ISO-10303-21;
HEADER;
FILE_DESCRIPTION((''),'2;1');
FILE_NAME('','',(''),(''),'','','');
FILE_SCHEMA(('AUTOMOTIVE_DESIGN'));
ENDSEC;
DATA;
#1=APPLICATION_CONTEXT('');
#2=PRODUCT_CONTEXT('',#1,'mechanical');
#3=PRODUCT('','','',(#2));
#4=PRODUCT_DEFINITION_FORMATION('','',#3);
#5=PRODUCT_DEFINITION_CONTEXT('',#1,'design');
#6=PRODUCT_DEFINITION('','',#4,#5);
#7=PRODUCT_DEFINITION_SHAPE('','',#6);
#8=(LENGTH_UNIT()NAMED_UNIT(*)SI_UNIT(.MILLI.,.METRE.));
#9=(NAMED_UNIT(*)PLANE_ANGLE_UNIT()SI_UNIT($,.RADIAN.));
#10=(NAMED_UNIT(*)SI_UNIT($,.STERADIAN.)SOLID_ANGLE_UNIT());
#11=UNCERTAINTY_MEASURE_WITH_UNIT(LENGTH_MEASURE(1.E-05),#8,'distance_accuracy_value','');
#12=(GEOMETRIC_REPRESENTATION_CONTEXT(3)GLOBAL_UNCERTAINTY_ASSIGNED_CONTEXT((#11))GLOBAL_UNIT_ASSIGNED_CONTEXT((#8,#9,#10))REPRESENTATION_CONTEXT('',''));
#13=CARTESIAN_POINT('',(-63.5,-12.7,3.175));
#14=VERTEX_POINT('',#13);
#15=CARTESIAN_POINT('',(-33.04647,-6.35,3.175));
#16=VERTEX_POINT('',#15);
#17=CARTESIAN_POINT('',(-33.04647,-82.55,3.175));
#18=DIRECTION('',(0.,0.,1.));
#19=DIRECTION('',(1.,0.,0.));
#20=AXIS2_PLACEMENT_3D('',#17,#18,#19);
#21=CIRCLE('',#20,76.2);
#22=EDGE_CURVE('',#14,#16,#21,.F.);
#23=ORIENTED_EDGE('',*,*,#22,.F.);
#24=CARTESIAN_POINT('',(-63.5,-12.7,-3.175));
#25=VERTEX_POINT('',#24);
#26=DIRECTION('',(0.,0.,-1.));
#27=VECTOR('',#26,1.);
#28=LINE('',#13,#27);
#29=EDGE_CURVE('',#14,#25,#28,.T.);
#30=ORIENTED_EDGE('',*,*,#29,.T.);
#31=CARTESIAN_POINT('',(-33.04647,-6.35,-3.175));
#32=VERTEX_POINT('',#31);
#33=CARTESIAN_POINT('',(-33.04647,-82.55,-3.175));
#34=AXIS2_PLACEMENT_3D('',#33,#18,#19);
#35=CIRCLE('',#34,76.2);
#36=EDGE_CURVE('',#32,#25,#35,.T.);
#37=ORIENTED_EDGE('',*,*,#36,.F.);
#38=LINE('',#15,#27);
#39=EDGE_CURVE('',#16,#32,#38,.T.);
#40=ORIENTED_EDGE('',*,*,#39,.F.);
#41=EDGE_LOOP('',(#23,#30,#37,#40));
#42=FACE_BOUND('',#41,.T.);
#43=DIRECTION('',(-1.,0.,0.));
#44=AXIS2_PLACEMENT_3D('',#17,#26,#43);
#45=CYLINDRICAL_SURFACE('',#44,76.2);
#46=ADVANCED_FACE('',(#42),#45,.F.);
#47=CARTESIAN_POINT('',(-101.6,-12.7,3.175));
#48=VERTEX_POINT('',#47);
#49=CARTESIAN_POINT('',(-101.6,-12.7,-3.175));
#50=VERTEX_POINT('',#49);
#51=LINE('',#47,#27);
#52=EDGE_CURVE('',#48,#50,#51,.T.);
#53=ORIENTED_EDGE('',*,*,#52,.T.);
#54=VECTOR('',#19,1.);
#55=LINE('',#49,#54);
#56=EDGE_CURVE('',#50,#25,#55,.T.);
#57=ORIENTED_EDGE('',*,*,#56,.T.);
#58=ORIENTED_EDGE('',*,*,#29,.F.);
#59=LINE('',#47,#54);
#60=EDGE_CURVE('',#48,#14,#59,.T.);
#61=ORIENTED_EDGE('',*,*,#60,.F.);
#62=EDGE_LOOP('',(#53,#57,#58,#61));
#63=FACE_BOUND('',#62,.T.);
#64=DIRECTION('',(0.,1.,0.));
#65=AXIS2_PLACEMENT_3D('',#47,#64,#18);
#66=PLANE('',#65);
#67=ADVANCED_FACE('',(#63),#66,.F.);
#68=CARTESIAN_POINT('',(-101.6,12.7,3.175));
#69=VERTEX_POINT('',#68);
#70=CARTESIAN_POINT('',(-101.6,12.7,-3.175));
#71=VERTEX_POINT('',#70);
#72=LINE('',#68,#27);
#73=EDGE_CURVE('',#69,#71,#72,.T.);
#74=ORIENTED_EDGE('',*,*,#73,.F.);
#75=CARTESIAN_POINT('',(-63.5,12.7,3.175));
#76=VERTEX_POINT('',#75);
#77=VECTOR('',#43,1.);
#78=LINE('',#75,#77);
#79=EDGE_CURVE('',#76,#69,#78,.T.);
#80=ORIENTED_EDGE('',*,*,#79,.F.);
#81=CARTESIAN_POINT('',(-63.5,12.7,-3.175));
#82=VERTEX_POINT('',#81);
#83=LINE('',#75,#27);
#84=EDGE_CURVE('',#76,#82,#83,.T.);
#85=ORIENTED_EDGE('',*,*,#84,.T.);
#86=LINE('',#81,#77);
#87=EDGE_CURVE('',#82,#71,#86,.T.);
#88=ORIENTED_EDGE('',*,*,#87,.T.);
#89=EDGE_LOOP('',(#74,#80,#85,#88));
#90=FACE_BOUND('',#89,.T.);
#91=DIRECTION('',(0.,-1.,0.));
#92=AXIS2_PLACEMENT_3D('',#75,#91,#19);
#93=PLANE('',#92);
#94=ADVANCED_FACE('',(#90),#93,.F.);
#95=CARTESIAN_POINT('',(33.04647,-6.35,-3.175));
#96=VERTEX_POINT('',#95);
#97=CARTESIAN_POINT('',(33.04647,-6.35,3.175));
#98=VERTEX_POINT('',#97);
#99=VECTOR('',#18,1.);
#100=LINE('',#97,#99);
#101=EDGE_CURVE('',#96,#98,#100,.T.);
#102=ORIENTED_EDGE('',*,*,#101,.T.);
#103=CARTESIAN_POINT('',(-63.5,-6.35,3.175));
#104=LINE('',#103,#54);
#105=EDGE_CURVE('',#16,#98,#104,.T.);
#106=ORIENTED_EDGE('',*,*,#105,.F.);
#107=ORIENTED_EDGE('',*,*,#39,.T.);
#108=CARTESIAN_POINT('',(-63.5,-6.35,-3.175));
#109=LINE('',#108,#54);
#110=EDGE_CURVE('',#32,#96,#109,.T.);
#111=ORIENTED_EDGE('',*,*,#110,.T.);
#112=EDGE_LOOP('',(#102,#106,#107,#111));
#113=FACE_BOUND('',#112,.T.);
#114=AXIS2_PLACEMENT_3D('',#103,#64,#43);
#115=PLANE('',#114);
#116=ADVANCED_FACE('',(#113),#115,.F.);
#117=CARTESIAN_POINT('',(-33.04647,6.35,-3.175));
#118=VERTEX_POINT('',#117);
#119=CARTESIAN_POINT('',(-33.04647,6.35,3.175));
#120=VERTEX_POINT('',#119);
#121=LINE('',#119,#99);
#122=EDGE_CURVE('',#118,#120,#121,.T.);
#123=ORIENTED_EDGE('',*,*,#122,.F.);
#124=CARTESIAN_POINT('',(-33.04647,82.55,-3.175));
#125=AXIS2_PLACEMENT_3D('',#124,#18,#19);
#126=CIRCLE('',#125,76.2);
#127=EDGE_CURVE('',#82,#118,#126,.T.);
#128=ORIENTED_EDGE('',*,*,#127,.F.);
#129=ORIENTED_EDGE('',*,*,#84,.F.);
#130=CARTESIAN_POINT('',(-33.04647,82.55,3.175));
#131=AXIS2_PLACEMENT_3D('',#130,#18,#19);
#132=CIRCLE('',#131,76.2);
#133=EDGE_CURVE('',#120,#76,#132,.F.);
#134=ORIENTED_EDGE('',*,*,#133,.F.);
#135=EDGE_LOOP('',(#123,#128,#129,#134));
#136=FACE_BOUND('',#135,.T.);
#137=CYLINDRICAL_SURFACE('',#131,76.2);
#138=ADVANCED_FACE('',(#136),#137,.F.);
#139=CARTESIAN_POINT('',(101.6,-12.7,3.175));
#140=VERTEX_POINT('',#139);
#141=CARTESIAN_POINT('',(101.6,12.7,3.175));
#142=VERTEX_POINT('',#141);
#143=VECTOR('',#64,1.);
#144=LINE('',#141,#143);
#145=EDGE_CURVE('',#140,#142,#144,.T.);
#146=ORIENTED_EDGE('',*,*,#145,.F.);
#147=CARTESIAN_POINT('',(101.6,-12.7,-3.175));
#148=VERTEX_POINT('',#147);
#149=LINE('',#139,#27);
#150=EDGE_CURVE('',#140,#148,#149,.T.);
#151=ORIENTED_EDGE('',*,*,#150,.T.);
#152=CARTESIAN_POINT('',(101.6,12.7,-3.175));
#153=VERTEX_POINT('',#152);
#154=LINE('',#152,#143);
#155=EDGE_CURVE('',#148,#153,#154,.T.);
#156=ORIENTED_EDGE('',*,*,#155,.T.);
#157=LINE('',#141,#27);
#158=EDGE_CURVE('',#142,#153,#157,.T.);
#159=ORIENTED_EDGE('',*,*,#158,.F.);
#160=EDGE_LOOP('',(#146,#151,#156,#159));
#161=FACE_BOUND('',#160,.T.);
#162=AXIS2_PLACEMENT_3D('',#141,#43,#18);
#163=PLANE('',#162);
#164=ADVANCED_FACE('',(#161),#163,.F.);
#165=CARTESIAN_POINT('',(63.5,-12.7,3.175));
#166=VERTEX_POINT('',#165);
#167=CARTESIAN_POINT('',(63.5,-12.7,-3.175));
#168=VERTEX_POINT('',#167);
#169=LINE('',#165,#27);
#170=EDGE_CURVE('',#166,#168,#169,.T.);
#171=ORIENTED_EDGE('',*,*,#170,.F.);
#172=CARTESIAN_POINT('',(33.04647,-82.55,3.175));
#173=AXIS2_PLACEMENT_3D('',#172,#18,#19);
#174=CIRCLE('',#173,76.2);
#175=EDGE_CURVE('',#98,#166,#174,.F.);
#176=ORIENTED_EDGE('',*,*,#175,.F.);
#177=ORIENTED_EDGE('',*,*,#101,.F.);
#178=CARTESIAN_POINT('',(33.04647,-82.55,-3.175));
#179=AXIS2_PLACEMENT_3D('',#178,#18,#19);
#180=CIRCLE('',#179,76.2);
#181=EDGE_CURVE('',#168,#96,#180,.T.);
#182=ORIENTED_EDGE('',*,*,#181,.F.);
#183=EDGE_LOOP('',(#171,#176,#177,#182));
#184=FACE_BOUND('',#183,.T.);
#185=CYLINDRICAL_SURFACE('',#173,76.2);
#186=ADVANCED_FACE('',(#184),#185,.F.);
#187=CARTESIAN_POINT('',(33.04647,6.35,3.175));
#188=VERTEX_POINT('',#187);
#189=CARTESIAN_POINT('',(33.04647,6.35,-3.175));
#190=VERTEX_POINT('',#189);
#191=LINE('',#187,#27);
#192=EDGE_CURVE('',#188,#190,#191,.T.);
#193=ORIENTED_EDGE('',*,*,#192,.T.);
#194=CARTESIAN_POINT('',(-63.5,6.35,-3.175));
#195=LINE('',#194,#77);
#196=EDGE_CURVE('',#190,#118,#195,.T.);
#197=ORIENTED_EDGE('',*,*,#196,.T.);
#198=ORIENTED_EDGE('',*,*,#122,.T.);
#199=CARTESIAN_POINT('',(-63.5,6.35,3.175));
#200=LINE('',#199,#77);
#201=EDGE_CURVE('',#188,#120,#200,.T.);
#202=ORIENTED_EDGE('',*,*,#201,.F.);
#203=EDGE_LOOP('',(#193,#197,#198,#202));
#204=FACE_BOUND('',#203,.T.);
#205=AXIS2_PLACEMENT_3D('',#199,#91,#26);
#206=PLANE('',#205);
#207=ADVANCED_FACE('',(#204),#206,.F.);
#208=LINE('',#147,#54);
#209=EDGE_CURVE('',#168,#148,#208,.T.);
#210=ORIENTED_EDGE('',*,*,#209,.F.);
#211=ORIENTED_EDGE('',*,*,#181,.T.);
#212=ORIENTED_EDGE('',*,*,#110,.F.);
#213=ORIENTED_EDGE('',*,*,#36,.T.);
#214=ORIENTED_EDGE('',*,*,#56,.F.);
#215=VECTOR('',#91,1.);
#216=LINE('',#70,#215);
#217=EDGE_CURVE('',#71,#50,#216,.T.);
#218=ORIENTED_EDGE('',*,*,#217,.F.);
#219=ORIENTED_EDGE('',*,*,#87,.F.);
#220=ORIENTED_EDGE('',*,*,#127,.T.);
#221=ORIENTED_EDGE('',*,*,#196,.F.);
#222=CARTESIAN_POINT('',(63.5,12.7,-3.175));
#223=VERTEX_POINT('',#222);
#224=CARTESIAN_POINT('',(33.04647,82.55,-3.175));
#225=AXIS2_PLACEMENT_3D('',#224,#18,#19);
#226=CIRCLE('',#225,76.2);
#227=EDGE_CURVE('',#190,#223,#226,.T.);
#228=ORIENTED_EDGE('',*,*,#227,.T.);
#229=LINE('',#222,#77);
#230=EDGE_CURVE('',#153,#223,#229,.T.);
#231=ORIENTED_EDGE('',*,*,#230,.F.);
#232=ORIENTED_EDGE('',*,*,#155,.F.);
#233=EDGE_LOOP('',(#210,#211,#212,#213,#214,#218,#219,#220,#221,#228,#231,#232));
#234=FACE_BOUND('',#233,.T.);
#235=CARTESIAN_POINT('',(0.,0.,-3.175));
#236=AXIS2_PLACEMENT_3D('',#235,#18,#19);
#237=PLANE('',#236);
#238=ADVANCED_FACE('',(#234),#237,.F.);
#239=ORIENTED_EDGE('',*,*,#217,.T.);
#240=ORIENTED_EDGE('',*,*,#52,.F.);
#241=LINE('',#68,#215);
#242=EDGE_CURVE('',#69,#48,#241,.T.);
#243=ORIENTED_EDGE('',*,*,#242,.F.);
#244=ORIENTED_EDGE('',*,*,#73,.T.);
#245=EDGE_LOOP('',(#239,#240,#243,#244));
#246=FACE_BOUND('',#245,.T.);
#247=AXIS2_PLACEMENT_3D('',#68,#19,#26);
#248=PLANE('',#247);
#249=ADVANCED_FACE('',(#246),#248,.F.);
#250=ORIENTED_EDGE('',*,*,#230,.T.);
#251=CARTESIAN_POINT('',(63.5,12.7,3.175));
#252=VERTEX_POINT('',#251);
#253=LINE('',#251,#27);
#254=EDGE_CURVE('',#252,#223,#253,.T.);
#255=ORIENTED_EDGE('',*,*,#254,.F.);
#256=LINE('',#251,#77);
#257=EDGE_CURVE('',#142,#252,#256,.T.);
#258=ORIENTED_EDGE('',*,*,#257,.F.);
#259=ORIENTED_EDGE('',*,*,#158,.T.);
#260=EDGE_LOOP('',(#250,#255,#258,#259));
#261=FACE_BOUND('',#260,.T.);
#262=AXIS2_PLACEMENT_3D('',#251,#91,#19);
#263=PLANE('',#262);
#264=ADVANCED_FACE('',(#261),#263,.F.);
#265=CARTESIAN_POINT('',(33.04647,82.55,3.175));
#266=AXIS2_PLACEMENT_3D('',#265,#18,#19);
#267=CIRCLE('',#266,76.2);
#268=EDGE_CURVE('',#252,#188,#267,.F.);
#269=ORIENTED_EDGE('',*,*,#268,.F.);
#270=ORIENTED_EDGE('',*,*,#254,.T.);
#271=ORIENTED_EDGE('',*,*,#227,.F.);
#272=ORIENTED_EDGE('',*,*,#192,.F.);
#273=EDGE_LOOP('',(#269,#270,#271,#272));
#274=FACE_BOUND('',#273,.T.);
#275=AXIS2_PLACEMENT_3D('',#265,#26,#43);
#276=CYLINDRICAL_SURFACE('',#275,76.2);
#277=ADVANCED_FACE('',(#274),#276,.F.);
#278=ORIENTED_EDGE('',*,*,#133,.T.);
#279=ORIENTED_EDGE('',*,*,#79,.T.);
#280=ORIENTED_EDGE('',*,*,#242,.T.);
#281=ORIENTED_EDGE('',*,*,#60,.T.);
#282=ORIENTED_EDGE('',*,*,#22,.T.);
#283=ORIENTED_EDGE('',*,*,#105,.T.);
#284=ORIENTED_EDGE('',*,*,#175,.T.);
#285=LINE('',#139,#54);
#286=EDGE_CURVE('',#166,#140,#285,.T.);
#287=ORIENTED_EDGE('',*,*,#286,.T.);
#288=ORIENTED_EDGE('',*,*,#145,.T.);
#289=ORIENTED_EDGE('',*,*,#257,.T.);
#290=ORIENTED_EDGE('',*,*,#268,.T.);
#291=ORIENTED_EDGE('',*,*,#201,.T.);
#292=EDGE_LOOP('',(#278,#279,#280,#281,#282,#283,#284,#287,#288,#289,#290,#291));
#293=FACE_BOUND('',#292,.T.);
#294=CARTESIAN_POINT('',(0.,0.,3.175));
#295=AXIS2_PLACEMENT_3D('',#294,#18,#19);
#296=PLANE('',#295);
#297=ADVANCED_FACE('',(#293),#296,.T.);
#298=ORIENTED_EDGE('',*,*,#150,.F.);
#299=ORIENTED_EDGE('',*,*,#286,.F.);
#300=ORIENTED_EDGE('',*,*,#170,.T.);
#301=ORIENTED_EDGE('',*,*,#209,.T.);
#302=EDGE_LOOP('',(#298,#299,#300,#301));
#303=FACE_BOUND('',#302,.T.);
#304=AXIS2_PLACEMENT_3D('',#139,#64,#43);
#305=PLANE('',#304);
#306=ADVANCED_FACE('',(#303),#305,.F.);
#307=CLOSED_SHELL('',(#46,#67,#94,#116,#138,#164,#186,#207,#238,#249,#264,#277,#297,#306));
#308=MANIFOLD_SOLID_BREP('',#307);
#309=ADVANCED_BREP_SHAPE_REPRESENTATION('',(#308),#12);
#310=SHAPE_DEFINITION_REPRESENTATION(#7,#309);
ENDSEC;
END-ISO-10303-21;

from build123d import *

# Parameters (mm, degrees)
F_1_4_INCH_THICKNESS_DEPTH = 3.175
FILLET1_R                  = 76.2


with BuildPart() as part:
    # Sketch1 → 1/4 Inch Thickness (new, symmetric)
    with BuildSketch(Plane.XY):
        Polygon((-63.5, 6.35), (63.5, 6.35), (63.5, 12.7), (101.6, 12.7), (101.6, -12.7), (63.5, -12.7), (63.5, -6.35), (-63.5, -6.35), (-63.5, -12.7), (-101.6, -12.7), (-101.6, 12.7), (-63.5, 12.7), align=None)
    extrude(amount=F_1_4_INCH_THICKNESS_DEPTH, both=True)

    # Fillet1
    # the kernel refuses this fillet: 76.2 mm, written as the material it adds along each edge
    with BuildSketch(Plane(origin=(63.5, -6.35, 3.175), x_dir=(-1, 0, 0), z_dir=(0, 0, -1))) as fillet1_piece_1:
        with BuildLine():
            CenterArc((30.453530173, -76.2), FILLET1_R, 90, 23.556464309)
            Line((0, -6.35), (-0.609070603, -4.953))
            ThreePointArc((-0.609070603, -4.953), (-1.524, -3.175), (-1.524, 0))
            Line((-1.524, 0), (0, 1.524))
            Line((0, 1.524), (30.453530173, 1.524))
            Line((30.453530173, 1.524), (30.453530173, 0))
        make_face()
    extrude(amount=6.35)
    with BuildSketch(Plane(origin=(63.5, 6.35, 3.175), x_dir=(-1, 0, 0), z_dir=(0, 0, -1)), Plane(origin=(-63.5, 6.35, -3.175), x_dir=(1, 0, 0), z_dir=(0, 0, 1))) as fillet1_piece_2:
        with BuildLine():
            CenterArc((30.453530173, 76.2), FILLET1_R, 246.443535691, 23.556464309)
            Line((0, 6.35), (-0.609070603, 4.953))
            ThreePointArc((-0.609070603, 4.953), (-1.524, 3.175), (-1.524, 0))
            Line((-1.524, 0), (0, -1.524))
            Line((0, -1.524), (30.453530173, -1.524))
            Line((30.453530173, -1.524), (30.453530173, 0))
        make_face()
    extrude(amount=6.35)
    with BuildSketch(Plane(origin=(-63.5, -6.35, 3.175), x_dir=(0, -1, 0), z_dir=(0, 0, -1))) as fillet1_piece_3:
        with BuildLine():
            CenterArc((76.2, -30.453530173), FILLET1_R, 156.443535691, 23.556464309)
            Line((0, -30.453530173), (-1.524, -30.453530173))
            Line((-1.524, -30.453530173), (-1.524, 0))
            Line((-1.524, 0), (0, 1.524))
            ThreePointArc((0, 1.524), (3.175, 1.524), (4.953, 0.609070603))
            Line((4.953, 0.609070603), (6.35, 0))
        make_face()
    extrude(amount=6.35)


solid = part.part
